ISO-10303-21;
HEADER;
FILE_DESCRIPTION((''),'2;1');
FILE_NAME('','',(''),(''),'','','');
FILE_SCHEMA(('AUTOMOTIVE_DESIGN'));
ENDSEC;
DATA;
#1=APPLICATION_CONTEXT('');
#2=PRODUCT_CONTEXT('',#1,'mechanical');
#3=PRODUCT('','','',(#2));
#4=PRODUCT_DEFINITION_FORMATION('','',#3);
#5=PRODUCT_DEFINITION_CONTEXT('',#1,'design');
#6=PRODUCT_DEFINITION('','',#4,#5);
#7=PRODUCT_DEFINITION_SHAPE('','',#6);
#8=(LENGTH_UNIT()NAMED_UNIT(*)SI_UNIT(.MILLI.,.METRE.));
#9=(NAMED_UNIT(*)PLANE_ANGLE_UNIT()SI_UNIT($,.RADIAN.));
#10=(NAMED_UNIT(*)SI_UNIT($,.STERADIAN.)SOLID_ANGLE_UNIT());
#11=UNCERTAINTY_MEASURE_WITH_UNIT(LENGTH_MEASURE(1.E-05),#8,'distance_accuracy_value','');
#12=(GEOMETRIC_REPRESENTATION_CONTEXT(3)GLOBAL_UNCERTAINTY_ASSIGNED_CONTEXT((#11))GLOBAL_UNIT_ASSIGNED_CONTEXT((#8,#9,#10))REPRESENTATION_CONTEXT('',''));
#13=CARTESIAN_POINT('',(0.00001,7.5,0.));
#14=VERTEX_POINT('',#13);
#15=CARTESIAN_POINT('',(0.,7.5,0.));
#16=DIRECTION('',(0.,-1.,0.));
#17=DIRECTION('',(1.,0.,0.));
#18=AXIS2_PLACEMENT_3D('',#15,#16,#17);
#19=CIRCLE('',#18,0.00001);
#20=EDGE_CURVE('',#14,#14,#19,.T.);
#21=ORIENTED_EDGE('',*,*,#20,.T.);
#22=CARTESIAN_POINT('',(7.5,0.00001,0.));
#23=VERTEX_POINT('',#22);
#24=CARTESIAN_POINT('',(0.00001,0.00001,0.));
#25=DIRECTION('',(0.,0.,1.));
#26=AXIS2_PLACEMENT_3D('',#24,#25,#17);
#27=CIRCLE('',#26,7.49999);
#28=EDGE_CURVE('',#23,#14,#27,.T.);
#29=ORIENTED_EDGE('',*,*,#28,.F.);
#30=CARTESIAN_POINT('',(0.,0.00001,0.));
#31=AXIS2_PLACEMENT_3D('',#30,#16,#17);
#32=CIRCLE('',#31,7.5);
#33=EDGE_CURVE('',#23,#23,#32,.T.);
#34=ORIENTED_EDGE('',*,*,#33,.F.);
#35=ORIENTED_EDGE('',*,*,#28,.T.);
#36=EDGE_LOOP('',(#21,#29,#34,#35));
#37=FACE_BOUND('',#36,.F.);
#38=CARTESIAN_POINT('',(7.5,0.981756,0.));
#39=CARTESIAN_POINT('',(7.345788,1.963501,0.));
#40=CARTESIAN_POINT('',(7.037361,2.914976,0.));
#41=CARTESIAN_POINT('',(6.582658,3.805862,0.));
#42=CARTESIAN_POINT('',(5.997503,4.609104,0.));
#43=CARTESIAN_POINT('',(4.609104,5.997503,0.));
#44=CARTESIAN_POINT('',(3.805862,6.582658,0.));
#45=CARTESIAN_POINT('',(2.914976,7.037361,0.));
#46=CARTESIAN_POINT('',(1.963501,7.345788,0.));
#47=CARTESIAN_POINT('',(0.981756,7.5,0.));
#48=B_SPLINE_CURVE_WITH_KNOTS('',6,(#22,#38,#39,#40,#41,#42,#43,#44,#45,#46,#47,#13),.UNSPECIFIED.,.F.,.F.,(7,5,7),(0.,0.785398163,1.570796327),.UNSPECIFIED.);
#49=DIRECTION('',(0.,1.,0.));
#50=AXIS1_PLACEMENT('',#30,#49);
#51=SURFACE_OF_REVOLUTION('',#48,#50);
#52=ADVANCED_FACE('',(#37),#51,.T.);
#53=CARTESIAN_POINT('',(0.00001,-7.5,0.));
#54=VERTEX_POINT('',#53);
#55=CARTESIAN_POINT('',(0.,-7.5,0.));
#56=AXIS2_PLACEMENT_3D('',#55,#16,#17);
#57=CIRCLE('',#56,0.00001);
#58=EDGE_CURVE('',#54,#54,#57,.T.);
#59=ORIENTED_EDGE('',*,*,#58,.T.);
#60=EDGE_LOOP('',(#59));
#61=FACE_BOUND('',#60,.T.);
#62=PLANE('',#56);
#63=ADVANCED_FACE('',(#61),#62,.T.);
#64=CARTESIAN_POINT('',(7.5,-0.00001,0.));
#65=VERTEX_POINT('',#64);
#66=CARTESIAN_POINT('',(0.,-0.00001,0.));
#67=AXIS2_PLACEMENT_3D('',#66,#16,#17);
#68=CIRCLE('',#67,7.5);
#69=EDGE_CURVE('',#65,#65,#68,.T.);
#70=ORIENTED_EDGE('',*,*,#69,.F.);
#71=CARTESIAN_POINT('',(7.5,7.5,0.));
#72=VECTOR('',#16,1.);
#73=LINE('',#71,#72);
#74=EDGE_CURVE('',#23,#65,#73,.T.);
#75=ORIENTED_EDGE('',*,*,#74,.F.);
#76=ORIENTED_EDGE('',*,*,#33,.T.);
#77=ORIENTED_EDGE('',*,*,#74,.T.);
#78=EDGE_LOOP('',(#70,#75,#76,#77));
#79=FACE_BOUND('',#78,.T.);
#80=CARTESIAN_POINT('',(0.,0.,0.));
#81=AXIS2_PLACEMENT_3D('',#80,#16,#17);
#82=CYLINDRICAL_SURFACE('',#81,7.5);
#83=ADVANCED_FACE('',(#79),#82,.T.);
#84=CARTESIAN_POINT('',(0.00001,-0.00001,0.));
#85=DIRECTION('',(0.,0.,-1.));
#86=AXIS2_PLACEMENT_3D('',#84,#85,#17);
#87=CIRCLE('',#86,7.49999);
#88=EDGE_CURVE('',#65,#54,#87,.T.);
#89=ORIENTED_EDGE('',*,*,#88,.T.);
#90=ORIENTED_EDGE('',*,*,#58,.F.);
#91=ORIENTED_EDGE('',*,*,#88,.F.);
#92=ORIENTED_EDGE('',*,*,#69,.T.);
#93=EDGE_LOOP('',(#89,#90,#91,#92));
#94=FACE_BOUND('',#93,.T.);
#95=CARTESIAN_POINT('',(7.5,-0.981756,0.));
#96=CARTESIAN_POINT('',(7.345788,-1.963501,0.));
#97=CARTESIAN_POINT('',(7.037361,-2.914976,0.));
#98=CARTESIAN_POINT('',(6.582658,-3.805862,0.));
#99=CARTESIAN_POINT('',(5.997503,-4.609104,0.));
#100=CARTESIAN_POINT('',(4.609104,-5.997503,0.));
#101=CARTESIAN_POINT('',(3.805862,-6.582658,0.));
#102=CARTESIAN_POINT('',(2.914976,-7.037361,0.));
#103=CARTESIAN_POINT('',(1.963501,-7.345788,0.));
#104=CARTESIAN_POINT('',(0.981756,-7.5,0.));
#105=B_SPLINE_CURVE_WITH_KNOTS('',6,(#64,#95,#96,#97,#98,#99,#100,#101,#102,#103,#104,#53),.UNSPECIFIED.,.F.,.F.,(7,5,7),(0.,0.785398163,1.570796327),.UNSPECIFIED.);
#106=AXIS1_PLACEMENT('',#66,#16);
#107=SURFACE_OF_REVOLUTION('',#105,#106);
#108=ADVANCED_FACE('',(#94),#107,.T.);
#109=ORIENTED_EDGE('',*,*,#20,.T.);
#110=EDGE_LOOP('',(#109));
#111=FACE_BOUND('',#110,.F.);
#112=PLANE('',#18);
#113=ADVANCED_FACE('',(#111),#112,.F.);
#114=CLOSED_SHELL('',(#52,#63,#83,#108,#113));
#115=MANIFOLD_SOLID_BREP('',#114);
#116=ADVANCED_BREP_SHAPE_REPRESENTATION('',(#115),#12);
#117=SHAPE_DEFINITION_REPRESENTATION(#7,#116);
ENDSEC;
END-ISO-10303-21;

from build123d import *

# Parameters (mm, degrees)
F0_R     = 7.5
F1_DEPTH = 7.5
F2_R     = 7.49999
F3_DEPTH = 7.5
F4_R     = 7.49999


# Not quite as in the source:
# - a fillet or chamfer is up to 0.001 mm smaller than in the source, because OpenCascade refuses the exact size


with BuildPart() as f1:
    # F0 (on Front) → F1 (new body)
    with BuildSketch(Plane.XZ):
        Circle(F0_R)
    extrude(amount=F1_DEPTH)

    # F2 (radius 7.5 in the source; OpenCascade refuses exactly that, so slightly less here)
    f2_edges = [f1.edges().sort_by_distance(p)[0] for p in [
        (-7.5, -7.5, 0),
    ]]
    fillet(f2_edges, radius=F2_R)

    # F3 (add): a face of the model
    f3_faces = [f1.faces().sort_by_distance(p)[0] for p in [
        (0, 0, 0),
    ]]
    extrude(f3_faces, amount=F3_DEPTH)

    # F4 (radius 7.5 in the source; OpenCascade refuses exactly that, so slightly less here)
    f4_edges = [f1.edges().sort_by_distance(p)[0] for p in [
        (-7.5, 7.5, 0),
    ]]
    fillet(f4_edges, radius=F4_R)


solid = f1.part
